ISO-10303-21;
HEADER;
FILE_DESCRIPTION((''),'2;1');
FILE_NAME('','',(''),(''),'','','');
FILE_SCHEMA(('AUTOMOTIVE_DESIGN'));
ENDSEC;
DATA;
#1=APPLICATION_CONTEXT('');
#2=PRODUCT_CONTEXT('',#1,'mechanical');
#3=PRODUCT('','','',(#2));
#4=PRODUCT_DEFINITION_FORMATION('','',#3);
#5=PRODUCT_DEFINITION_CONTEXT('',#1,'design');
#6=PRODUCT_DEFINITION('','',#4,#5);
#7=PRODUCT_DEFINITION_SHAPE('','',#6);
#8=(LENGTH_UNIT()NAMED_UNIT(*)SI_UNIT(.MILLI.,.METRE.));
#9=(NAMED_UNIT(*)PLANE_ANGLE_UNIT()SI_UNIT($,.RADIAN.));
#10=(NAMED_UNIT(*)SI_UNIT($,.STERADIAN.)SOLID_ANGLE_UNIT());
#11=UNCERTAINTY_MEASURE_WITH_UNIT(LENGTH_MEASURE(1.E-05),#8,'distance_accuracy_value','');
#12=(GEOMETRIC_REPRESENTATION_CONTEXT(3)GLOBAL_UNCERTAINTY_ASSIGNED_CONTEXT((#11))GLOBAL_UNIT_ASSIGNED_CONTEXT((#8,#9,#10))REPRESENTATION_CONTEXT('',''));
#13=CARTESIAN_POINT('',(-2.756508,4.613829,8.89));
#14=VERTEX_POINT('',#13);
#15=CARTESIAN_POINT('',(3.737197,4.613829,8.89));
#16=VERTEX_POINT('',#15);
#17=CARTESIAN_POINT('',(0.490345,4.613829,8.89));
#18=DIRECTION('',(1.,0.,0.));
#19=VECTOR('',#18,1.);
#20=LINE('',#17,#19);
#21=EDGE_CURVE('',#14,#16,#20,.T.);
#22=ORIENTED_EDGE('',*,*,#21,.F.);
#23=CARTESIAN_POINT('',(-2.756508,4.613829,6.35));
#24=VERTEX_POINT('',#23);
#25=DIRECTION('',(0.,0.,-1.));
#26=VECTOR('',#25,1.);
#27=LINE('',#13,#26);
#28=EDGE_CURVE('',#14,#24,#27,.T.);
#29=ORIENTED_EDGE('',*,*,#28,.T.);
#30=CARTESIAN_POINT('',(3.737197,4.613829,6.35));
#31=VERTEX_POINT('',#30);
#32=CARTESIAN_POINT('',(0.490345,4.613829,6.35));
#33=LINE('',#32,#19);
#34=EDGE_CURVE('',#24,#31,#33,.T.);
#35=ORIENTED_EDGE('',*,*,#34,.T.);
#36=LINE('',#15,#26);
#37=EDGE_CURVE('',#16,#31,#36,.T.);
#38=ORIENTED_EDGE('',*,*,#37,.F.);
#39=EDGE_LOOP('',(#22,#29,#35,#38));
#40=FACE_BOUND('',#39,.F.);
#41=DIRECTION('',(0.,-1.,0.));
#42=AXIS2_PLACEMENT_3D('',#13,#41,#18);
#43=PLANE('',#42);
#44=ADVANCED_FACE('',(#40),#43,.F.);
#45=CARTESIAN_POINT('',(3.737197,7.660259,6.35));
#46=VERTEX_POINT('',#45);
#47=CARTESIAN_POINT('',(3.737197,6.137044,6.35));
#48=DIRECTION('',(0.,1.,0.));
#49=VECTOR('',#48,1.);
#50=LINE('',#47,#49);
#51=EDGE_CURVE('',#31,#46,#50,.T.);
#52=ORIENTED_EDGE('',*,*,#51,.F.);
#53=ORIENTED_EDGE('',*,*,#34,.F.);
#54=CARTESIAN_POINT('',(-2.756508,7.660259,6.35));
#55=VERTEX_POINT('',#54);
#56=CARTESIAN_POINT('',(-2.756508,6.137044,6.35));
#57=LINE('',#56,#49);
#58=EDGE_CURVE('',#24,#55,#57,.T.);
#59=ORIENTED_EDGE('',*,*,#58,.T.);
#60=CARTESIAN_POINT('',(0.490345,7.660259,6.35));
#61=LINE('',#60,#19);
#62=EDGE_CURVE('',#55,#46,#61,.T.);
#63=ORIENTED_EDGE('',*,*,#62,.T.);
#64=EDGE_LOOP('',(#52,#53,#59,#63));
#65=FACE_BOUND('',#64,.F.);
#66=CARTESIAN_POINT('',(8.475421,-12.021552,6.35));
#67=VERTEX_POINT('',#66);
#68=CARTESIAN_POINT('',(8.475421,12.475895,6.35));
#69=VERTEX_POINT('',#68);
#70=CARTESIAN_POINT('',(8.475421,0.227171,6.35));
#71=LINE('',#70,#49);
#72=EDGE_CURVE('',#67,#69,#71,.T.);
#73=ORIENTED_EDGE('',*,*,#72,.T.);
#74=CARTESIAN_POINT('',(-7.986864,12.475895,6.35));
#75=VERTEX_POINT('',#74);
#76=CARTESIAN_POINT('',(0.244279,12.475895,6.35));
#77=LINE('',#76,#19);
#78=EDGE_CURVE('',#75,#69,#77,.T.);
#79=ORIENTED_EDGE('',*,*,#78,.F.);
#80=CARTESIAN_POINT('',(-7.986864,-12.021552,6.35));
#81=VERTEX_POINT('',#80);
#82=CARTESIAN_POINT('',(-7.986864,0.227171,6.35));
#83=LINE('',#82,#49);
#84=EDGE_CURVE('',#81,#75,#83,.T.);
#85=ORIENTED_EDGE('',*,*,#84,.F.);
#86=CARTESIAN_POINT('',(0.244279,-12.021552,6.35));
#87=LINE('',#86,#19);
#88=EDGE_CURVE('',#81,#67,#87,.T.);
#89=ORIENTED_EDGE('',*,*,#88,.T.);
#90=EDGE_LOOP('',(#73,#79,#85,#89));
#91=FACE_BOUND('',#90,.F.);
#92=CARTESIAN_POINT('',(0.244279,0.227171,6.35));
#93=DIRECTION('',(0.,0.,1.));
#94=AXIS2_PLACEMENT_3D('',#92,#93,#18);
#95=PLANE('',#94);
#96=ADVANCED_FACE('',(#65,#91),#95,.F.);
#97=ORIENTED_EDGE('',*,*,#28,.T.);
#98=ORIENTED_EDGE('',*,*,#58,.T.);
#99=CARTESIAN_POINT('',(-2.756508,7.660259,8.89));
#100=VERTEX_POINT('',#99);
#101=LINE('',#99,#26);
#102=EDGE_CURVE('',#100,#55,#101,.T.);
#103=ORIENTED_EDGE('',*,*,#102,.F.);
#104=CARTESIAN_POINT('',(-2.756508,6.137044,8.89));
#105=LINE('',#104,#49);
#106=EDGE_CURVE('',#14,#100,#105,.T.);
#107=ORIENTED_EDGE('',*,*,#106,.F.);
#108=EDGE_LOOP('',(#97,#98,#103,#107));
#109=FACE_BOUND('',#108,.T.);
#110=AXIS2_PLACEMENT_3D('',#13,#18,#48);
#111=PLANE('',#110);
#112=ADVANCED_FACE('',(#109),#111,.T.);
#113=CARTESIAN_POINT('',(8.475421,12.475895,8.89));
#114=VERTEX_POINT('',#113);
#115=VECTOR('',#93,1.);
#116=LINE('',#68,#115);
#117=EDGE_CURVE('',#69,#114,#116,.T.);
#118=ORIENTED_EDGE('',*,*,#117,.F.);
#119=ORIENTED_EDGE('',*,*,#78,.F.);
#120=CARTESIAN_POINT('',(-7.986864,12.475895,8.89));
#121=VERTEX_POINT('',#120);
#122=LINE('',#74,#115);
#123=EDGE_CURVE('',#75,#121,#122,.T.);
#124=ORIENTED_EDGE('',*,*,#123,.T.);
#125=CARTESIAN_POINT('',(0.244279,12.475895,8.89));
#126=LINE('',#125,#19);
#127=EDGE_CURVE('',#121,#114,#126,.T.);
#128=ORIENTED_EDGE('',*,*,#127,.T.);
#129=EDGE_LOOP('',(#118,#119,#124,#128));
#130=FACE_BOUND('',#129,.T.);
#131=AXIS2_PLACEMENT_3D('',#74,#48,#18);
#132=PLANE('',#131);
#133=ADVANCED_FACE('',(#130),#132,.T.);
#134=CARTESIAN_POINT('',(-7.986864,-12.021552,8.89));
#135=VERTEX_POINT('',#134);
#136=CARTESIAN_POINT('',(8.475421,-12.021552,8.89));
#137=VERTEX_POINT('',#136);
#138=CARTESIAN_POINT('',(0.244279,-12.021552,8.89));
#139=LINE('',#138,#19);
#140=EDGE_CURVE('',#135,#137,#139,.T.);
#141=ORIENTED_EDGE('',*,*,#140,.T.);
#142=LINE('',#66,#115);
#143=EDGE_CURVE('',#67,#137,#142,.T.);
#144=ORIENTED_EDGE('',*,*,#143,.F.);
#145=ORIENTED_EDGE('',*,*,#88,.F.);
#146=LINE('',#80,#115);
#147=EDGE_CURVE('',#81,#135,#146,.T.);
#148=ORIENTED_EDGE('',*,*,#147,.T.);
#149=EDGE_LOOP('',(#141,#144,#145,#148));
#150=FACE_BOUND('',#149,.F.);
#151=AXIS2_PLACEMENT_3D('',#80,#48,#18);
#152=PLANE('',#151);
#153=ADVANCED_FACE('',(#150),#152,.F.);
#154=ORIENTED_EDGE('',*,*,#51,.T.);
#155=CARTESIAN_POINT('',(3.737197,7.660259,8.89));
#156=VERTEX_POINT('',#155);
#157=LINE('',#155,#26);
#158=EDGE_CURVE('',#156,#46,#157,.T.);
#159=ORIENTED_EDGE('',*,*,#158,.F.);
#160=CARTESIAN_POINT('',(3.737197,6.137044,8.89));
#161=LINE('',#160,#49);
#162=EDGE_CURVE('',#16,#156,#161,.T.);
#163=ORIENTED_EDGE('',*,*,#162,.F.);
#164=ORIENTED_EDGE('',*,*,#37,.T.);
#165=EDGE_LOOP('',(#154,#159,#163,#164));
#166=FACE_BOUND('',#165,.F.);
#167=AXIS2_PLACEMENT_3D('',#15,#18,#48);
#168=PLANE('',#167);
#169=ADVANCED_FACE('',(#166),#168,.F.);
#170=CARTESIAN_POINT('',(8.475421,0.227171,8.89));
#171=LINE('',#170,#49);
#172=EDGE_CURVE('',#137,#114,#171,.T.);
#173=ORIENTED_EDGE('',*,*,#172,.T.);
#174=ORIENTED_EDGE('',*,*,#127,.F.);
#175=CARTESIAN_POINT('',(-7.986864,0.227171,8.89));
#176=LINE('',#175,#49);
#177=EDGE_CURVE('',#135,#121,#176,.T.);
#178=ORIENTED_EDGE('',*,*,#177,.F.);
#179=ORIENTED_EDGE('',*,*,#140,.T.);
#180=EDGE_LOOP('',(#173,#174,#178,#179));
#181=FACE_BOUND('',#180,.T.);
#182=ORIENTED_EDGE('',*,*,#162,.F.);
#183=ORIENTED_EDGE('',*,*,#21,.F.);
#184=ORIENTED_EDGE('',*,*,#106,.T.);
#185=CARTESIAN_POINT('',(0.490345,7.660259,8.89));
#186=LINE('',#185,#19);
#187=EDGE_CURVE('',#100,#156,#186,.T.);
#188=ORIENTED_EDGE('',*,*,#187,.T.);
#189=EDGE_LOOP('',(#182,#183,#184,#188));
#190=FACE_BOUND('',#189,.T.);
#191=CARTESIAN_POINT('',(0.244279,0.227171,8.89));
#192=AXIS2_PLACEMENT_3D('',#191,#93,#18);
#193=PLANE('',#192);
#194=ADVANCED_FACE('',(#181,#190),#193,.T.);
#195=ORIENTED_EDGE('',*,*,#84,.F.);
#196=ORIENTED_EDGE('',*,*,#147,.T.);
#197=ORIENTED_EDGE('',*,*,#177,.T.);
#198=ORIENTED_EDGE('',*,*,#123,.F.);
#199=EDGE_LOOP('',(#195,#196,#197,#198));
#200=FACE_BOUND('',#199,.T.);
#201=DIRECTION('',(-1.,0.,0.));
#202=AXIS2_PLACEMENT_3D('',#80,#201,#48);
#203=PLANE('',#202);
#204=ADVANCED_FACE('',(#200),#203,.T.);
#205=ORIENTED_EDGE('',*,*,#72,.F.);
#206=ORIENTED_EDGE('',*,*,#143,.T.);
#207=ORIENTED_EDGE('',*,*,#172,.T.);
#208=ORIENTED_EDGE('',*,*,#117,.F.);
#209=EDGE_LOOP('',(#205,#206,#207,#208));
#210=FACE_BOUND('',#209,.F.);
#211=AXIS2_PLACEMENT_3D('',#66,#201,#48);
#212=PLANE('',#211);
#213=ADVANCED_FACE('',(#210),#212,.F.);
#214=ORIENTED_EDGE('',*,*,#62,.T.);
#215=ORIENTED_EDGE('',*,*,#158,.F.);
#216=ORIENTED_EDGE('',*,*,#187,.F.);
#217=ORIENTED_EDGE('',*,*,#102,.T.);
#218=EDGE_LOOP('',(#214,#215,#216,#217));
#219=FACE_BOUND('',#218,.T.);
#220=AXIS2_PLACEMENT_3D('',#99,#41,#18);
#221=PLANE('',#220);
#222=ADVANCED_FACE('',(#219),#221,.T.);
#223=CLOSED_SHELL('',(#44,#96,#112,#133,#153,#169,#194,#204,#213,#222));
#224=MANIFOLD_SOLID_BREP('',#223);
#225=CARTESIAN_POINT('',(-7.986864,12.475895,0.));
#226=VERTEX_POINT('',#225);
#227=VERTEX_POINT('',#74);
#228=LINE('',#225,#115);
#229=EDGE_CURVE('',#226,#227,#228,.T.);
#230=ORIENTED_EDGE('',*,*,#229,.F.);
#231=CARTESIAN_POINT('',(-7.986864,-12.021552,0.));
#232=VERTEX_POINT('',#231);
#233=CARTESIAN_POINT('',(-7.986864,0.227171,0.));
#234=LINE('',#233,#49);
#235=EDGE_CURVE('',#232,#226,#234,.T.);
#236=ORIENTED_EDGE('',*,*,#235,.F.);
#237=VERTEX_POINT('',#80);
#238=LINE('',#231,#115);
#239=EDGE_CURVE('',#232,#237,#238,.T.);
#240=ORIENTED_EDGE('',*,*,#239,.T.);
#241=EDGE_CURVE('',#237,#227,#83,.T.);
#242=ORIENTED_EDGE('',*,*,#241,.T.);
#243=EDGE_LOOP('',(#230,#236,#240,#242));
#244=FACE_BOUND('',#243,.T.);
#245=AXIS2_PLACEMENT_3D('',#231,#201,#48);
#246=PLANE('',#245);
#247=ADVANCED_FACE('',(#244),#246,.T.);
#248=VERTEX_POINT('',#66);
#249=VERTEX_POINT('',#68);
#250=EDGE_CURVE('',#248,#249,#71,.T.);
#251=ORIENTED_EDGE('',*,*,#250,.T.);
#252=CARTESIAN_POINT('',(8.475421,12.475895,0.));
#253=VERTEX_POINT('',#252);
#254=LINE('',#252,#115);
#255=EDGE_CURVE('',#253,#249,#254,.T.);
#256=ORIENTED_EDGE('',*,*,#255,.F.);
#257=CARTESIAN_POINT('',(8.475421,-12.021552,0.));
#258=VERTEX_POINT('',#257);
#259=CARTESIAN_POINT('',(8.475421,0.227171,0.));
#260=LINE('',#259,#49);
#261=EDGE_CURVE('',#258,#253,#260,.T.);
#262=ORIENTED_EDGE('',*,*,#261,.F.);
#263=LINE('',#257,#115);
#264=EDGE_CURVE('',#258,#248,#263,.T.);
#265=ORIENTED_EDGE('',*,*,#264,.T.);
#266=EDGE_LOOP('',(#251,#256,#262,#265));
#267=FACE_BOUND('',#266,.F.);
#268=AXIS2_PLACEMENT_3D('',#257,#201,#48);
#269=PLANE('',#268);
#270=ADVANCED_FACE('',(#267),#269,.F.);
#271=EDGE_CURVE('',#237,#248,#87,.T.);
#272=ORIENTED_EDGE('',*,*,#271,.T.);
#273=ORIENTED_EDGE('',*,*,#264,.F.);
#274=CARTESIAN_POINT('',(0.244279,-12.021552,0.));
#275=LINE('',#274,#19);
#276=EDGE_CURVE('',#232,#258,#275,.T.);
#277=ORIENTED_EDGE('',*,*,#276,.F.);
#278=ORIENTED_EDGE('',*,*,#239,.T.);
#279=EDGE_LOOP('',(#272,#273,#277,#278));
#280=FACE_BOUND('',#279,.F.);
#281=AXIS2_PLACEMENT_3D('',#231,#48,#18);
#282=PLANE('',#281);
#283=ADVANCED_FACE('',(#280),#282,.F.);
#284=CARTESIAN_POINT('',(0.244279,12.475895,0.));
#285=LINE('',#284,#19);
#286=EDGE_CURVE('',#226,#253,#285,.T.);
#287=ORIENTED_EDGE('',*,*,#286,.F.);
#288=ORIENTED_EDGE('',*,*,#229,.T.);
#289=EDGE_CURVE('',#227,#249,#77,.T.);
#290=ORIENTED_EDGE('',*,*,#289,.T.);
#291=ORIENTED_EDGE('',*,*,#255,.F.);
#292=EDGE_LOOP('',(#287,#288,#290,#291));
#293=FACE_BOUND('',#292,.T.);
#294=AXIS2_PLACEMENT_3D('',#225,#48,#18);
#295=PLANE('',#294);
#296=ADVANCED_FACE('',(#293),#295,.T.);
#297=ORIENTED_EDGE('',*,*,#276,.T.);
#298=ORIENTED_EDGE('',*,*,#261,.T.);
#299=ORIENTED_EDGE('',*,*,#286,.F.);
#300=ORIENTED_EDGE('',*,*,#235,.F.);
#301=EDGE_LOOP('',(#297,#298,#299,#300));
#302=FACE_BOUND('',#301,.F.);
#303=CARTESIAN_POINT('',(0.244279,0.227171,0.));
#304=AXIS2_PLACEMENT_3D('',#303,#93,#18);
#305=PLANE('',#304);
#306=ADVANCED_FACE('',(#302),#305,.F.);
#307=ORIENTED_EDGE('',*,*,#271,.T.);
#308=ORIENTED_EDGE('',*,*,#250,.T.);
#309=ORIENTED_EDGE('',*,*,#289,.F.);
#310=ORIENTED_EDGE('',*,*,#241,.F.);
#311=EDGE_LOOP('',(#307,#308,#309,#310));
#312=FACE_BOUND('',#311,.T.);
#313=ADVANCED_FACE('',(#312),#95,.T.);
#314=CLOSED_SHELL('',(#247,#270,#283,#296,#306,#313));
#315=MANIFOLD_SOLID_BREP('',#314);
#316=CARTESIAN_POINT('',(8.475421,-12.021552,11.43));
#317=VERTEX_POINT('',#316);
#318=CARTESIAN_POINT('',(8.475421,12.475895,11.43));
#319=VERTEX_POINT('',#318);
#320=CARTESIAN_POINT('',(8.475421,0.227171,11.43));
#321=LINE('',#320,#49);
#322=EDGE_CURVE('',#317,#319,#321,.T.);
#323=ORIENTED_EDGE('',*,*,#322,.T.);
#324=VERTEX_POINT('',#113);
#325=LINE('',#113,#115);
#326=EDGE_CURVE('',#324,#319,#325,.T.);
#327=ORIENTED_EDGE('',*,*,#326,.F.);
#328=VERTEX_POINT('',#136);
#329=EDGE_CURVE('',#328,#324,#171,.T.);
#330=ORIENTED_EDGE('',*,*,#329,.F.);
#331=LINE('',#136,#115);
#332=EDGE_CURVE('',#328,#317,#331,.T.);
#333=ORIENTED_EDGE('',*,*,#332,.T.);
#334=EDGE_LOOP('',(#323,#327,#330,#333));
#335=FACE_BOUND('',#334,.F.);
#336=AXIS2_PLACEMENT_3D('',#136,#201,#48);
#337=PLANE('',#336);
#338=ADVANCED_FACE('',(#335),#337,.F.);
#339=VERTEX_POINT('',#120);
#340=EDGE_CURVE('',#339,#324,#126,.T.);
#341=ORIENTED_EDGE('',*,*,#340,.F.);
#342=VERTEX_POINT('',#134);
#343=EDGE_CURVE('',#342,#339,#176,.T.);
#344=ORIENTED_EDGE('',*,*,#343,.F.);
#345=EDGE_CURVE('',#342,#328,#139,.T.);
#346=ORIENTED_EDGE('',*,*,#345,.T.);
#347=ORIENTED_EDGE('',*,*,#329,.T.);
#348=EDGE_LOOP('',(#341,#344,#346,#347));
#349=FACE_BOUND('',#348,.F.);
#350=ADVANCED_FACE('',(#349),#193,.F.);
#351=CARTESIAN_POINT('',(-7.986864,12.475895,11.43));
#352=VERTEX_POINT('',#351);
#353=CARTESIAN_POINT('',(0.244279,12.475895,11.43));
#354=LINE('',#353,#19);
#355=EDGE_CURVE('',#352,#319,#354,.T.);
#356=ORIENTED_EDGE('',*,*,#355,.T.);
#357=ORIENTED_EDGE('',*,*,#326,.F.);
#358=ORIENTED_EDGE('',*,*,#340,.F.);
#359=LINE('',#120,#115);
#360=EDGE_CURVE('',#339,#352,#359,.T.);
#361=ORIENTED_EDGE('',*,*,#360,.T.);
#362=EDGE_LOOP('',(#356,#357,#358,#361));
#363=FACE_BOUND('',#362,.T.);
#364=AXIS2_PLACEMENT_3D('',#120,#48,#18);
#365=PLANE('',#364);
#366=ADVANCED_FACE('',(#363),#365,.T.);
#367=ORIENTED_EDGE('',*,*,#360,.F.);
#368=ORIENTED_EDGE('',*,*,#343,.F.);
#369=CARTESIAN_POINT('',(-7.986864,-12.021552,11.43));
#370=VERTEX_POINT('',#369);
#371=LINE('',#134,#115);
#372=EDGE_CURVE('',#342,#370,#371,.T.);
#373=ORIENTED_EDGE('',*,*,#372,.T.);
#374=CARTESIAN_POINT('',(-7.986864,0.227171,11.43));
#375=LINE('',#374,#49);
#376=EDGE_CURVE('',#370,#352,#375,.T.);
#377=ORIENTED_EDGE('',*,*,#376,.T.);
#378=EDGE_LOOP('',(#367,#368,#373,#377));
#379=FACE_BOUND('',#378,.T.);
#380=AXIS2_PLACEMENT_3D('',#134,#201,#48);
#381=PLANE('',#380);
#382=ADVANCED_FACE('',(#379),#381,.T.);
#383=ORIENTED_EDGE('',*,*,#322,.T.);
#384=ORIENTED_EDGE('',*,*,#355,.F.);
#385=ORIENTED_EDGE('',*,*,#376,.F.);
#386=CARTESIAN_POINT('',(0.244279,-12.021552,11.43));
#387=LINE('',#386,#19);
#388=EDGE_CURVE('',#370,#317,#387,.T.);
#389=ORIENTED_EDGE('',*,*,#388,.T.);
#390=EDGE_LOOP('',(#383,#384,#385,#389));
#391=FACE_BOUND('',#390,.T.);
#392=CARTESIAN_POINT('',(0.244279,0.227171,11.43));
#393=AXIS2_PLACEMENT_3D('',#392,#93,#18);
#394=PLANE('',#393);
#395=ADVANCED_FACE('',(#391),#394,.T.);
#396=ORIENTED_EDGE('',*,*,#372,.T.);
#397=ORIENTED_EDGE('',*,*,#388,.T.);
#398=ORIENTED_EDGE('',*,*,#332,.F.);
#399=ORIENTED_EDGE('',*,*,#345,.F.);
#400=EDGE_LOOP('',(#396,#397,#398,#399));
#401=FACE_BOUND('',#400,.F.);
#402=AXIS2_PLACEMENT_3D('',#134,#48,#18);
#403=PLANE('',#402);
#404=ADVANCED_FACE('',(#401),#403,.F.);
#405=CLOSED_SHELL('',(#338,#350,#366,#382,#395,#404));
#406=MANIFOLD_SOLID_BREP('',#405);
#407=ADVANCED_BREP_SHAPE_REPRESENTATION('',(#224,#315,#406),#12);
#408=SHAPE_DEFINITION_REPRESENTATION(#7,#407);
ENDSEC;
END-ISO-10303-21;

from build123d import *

# Parameters (mm, degrees)
F0_W     = 16.462284606
F0_H     = 24.4974466041
F1_DEPTH = 6.35
F2_W     = 16.462284606
F2_H     = 24.4974466041
F3_DEPTH = 2.54
F4_W     = 6.493705092
F4_H     = 3.0464301817
F5_DEPTH = 2.54
F6_W     = 16.462284606
F6_H     = 24.4974466041
F7_DEPTH = 2.54


# Not quite as in the source:
# - a feature names something its author has since deleted; it is built from what else it names


with BuildPart() as f1:
    # F0 (on Top) → F1 (new body)
    with BuildSketch(Plane.XY):
        with Locations((0.2442786936, 0.227171462)):
            Rectangle(F0_W, F0_H)
    extrude(amount=F1_DEPTH)


with BuildPart() as f3:
    # F2 (on face) → F3 (new body)
    with BuildSketch(Plane.XY.offset(6.35)):
        with Locations((0.2442786936, 0.227171462)):
            Rectangle(F2_W, F2_H)
    extrude(amount=F3_DEPTH)

    # F4 (on face) → F5 (cut)
    with BuildSketch(Plane.XY.offset(8.89)):
        with Locations((0.4903447116, 6.1370439362)):
            Rectangle(F4_W, F4_H)
    extrude(amount=-F5_DEPTH, mode=Mode.SUBTRACT)


with BuildPart() as f7:
    # F6 (on face) → F7 (new body)
    with BuildSketch(Plane.XY.offset(8.89)):
        with Locations((0.2442786936, 0.227171462)):
            Rectangle(F6_W, F6_H)
    extrude(amount=F7_DEPTH)


solid = Compound([f1.part, f3.part, f7.part])
